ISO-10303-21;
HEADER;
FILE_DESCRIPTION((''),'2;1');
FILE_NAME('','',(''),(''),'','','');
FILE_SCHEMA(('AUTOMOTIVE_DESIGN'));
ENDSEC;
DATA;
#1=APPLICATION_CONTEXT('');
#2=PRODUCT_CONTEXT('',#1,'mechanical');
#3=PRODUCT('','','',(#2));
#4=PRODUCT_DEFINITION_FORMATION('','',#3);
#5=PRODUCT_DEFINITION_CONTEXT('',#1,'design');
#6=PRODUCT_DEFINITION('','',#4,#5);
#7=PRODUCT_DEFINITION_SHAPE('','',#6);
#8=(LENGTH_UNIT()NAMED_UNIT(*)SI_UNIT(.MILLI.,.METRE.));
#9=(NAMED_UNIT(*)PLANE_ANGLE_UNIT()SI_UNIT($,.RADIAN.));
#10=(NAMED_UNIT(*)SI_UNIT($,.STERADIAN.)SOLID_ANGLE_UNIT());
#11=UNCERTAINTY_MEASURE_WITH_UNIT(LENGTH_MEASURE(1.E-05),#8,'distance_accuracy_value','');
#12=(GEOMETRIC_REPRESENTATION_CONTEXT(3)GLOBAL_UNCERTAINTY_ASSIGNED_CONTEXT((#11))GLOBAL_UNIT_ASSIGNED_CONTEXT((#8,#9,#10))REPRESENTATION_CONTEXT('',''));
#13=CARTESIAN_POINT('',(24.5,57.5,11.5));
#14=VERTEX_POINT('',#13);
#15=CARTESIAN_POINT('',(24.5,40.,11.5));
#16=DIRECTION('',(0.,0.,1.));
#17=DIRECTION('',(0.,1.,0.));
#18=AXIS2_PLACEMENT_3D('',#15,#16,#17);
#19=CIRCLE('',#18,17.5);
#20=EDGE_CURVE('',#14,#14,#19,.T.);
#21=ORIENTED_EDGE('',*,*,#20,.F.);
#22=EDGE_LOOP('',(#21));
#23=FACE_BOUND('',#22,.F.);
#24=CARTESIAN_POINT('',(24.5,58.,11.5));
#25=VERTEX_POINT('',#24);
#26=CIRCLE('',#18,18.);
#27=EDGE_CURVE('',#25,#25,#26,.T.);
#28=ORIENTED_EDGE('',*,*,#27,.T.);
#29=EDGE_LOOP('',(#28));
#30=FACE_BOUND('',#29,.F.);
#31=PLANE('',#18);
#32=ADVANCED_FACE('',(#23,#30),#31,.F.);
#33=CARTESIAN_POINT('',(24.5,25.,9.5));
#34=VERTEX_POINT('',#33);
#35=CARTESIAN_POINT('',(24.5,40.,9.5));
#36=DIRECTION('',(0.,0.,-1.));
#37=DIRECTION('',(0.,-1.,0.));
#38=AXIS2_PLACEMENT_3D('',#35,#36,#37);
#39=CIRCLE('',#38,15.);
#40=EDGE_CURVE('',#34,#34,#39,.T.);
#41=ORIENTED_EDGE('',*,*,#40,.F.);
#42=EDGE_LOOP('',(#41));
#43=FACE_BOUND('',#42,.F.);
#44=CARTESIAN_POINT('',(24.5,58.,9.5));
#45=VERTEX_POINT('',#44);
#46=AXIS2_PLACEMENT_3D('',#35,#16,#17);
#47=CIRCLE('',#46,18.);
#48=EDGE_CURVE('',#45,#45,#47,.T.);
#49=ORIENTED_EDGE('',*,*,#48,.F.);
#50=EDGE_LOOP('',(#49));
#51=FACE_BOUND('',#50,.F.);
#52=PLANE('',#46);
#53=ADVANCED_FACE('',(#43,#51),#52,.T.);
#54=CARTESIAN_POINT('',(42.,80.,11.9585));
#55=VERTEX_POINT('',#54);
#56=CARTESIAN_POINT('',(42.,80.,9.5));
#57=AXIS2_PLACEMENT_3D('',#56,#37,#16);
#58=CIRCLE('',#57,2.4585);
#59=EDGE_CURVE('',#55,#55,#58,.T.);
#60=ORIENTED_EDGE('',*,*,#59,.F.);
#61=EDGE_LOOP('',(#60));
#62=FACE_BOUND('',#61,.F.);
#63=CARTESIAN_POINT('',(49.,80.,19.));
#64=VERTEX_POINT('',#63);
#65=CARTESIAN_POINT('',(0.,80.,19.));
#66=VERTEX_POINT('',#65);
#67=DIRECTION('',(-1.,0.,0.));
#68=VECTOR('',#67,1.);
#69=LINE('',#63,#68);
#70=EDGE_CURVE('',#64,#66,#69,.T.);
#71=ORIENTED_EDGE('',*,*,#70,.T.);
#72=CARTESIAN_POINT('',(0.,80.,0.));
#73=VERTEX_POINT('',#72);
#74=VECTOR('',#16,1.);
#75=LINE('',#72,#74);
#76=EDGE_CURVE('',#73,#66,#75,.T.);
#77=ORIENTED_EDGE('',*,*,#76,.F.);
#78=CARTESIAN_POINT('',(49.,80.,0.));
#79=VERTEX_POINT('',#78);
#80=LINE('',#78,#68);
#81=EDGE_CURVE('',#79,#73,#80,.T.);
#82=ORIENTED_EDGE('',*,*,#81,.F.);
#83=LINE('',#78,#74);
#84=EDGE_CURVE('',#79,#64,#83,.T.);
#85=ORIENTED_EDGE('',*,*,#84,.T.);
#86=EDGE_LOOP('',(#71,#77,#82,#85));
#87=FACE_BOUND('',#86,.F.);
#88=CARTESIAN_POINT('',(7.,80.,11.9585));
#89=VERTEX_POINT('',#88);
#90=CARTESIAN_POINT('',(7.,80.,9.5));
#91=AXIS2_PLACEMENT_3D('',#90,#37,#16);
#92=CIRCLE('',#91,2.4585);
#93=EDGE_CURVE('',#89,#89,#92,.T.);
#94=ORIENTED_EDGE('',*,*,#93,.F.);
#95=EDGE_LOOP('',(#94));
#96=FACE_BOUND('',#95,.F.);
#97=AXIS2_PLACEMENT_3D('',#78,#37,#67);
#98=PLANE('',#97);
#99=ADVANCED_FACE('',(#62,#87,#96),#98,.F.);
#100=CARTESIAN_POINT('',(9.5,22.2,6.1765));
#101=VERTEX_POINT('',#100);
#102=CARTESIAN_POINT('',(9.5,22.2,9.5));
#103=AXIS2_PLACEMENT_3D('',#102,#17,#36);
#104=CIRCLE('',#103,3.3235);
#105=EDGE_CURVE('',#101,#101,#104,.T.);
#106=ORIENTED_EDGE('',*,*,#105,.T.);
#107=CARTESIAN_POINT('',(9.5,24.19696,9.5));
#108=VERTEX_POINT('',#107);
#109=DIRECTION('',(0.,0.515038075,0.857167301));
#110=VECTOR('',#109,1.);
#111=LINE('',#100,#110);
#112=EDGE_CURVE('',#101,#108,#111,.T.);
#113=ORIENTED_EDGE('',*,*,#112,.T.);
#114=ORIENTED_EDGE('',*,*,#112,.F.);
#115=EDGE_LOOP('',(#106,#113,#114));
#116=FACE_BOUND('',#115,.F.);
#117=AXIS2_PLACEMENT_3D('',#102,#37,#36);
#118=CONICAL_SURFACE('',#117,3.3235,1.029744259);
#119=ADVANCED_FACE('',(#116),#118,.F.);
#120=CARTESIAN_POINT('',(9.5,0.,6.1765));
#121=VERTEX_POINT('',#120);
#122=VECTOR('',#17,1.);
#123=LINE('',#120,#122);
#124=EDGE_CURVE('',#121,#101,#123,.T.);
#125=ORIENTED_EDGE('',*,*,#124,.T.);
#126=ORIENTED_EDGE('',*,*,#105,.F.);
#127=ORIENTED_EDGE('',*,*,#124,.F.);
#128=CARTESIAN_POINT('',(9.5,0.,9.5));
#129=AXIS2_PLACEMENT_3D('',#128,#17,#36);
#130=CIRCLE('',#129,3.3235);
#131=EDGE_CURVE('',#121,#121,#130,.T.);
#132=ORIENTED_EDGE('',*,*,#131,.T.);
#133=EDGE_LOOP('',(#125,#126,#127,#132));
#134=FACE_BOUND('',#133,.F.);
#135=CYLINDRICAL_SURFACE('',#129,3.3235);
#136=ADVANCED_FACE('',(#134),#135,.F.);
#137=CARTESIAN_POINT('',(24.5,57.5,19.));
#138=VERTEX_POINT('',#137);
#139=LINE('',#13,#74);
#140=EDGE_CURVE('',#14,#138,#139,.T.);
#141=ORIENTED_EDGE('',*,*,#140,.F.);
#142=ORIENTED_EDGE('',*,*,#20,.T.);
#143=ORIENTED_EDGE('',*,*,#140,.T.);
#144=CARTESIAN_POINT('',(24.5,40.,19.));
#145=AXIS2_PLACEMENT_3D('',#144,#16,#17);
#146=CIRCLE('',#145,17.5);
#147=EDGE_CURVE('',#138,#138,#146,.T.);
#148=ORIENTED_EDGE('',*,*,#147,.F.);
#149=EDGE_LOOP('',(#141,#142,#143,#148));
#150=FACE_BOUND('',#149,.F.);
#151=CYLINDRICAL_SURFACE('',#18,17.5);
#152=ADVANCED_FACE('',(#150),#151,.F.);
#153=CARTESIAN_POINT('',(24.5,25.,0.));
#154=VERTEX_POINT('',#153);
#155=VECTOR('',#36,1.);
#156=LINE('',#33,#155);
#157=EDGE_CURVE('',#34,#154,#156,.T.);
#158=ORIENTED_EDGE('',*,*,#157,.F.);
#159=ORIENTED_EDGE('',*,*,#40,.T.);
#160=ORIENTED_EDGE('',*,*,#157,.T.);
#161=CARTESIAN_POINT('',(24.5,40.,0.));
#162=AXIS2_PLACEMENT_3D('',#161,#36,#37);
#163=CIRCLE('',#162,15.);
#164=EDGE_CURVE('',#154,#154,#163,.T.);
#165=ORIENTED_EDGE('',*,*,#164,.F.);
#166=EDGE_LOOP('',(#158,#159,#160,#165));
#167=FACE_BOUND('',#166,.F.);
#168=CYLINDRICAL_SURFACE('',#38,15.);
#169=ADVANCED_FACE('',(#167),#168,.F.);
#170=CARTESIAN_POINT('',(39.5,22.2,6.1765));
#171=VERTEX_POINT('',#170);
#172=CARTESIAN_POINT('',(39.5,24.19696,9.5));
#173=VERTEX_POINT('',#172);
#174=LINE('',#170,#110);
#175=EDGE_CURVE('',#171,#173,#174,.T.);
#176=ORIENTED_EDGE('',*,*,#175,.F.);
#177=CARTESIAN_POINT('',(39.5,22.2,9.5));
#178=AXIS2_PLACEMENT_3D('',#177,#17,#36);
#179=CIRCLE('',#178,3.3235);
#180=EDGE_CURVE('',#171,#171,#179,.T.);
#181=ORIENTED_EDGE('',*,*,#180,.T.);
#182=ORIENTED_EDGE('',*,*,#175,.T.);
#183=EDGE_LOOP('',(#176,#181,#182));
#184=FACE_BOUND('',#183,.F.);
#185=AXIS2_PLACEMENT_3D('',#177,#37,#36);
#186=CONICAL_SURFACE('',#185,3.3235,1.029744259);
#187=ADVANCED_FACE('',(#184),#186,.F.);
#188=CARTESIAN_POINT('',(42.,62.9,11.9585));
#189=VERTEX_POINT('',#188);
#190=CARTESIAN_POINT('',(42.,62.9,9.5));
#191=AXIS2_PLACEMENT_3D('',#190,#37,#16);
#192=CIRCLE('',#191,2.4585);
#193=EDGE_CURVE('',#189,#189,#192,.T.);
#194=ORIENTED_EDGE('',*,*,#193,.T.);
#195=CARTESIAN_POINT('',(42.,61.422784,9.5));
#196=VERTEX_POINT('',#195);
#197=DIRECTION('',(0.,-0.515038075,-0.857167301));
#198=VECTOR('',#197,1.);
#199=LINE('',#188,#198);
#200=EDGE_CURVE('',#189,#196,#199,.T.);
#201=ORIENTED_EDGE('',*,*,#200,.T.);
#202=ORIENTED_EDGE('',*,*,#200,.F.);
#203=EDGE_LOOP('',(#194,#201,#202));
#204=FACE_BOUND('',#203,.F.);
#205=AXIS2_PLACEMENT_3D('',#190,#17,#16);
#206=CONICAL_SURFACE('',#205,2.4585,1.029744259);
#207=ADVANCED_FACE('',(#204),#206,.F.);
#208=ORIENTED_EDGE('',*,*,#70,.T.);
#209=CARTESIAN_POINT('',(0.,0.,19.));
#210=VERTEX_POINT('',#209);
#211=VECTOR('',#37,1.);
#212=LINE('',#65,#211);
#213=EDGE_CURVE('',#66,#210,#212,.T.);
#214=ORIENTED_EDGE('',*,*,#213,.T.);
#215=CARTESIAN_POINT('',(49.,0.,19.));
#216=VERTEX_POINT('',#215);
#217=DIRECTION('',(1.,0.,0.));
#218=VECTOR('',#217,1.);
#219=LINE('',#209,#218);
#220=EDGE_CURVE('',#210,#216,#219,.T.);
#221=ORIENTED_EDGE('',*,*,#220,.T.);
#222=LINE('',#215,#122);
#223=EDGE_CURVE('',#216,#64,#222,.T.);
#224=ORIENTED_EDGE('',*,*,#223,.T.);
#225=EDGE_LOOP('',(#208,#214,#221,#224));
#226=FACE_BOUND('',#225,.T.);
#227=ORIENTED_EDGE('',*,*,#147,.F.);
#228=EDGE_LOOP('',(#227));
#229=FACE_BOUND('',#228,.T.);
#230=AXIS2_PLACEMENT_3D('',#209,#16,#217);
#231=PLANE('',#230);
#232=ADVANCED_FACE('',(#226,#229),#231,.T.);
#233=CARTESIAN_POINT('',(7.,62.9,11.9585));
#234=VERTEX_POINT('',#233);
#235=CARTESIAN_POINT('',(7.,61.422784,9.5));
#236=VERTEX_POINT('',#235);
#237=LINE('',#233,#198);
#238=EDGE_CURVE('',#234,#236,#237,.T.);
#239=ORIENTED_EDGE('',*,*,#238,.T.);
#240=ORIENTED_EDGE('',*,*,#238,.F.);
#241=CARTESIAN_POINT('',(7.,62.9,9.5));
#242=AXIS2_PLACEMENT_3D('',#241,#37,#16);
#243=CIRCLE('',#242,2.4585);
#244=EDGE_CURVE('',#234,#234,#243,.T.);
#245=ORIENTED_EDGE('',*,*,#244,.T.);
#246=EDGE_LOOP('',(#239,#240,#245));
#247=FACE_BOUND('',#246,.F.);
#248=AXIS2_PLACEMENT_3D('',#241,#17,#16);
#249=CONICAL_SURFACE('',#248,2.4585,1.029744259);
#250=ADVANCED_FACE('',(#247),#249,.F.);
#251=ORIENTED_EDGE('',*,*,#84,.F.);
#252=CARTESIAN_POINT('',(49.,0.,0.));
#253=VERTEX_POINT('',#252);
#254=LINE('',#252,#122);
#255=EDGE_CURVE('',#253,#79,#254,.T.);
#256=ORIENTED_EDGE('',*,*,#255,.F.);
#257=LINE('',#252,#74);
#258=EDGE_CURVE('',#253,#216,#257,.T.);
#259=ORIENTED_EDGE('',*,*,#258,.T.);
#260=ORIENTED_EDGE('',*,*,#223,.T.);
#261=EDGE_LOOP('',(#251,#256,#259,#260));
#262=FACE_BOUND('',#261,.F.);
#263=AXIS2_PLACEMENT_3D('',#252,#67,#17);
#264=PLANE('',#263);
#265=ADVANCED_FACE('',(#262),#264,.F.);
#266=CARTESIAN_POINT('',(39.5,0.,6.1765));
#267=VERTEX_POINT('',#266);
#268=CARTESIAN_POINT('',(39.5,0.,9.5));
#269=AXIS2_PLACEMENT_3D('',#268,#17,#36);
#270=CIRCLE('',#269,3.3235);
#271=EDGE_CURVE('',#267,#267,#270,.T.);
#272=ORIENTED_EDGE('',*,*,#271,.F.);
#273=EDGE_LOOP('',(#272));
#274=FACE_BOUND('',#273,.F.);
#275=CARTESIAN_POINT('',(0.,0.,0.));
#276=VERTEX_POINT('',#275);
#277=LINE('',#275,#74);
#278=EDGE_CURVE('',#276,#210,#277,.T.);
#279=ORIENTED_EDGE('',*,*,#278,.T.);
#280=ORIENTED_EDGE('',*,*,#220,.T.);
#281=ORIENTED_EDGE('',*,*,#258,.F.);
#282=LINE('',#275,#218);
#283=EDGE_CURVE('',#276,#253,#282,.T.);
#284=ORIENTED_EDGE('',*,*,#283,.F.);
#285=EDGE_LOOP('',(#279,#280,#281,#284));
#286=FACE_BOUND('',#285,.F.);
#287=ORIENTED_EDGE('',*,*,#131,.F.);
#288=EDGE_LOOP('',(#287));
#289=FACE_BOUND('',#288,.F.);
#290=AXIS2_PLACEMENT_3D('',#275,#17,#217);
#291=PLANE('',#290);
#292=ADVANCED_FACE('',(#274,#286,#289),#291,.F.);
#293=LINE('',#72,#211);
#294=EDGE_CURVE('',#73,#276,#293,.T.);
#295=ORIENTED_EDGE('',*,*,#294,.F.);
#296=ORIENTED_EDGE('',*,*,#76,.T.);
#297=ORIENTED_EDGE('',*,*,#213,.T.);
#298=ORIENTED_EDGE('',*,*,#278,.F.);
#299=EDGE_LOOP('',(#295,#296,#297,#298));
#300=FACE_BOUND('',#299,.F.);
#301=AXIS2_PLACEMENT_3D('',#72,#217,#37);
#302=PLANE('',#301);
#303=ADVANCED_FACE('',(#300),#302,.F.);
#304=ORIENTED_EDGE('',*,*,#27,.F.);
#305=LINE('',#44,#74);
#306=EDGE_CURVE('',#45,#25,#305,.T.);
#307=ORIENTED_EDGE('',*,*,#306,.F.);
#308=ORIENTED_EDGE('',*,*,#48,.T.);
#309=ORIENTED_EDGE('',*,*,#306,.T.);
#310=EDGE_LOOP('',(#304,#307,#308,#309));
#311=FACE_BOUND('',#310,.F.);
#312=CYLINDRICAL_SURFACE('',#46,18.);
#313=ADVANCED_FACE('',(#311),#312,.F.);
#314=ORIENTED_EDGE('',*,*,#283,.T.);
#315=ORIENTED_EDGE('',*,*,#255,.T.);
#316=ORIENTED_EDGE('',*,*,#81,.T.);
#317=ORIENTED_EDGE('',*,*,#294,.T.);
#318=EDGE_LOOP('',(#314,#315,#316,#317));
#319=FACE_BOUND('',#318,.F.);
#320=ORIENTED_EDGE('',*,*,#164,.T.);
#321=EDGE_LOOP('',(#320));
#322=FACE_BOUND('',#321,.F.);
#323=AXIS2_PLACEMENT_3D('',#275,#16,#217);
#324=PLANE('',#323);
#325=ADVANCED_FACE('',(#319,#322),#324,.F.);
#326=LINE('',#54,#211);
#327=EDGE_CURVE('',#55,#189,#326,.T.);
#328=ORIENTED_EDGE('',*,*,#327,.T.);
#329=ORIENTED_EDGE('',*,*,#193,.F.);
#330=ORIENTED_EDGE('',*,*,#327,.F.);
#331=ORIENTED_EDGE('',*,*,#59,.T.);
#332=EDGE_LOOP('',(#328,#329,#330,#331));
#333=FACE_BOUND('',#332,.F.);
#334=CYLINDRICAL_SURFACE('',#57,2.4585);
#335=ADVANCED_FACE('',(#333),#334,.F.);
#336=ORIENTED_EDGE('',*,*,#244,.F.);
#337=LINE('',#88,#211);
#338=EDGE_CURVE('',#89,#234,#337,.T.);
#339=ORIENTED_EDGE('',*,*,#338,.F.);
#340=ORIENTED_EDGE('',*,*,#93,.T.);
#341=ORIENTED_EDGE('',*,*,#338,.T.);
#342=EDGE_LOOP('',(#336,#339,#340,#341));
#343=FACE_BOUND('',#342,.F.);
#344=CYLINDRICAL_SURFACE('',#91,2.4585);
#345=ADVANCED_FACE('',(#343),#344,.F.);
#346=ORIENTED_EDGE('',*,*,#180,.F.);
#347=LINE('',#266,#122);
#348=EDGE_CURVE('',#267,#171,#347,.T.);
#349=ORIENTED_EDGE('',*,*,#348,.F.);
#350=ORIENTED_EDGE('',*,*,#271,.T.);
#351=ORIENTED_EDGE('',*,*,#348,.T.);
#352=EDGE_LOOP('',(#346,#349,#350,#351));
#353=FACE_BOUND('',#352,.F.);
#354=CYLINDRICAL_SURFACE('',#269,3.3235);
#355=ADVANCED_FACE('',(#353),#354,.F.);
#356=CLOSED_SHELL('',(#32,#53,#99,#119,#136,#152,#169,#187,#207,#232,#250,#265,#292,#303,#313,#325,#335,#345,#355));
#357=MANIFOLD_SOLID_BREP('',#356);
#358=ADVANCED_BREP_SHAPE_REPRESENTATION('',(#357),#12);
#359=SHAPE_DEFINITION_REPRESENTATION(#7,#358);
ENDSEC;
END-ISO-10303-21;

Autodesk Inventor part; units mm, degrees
ref_plane "YZ Plane" through (0, 0, 0) normal (1, 0, 0) x (0, 1, 0)
ref_plane "XZ Plane" through (0, 0, 0) normal (0, 1, 0) x (-1, 0, 0)
sketch "Skizze1" plane through (0, 0, 0) normal (0, 0, 1) x (1, 0, 0)
  line L0 (0, 0) -> (49, 0)
  line L1 (49, 0) -> (49, 80)
  line L2 (49, 80) -> (0, 80)
  line L3 (0, 80) -> (0, 0)
  dimension "d0" = 49
  dimension "d1" = 80
extrude "Extrusion1" add sketch "Skizze1" along normal blind 19
sketch "Skizze2" plane through (0, 80, 0) normal (0, 1, 0) x (1, 0, 0)
  line L0 (0, 0) -> (0, -19) projected
  point P0 (7, -9.5)
  point P1 (0, -9.5)
  point P2 (42, -9.5)
  dimension "d11" = 7
  dimension "d12" = 35
hole "Bohrung1" at (7, 80, 9.5) at (42, 80, 9.5) direction (0, -1, 0) diameter 4.917 depth 17.1 tip angle 118 thread size "M6x1" class "6H" standard "ISO Metric profile"
sketch "Skizze3" plane through (0, 0, 0) normal (0, -1, 0) x (1, 0, 0)
  line L0 (0, 0) -> (0, 19) projected
  point P0 (9.5, 9.5)
  point P1 (0, 9.5)
  point P2 (0, 9.5)
  point P3 (0, 9.5)
  point P4 (39.5, 9.5)
  dimension "d20" = 9.5
  dimension "d21" = 30
hole "Bohrung2" at (9.5, 0, 9.5) at (39.5, 0, 9.5) direction (0, 1, 0) diameter 6.647 depth 22.2 tip angle 118 thread size "M8x1.25" class "6H" standard "ISO Metric profile"
ref_plane "Arbeitsebene1" through (0, 0, 9.5) normal (0, 0, 1) x (1, 0, 0)
sketch "Skizze6" plane through (0, 0, 9.5) normal (0, 0, 1) x (1, 0, 0)
  line L0 (49, 0) -> (49, 80) projected
  line L1 (49, 80) -> (0, 80) projected
  point P0 (0, 0)
  point P1 (24.5, 40)
  point P2 (49, 40)
  point P3 (24.5, 80)
hole "Bohrung4" at (24.5, 40, 9.5) direction (0, 0, 1) diameter 35 end through all counterbore diameter 36 counterbore depth 2
hole "Bohrung5" at (24.5, 40, 9.5) direction (0, 0, -1) diameter 30 end through all
properties part number "Lagerbock" material "Stahl, galvanisiert"
